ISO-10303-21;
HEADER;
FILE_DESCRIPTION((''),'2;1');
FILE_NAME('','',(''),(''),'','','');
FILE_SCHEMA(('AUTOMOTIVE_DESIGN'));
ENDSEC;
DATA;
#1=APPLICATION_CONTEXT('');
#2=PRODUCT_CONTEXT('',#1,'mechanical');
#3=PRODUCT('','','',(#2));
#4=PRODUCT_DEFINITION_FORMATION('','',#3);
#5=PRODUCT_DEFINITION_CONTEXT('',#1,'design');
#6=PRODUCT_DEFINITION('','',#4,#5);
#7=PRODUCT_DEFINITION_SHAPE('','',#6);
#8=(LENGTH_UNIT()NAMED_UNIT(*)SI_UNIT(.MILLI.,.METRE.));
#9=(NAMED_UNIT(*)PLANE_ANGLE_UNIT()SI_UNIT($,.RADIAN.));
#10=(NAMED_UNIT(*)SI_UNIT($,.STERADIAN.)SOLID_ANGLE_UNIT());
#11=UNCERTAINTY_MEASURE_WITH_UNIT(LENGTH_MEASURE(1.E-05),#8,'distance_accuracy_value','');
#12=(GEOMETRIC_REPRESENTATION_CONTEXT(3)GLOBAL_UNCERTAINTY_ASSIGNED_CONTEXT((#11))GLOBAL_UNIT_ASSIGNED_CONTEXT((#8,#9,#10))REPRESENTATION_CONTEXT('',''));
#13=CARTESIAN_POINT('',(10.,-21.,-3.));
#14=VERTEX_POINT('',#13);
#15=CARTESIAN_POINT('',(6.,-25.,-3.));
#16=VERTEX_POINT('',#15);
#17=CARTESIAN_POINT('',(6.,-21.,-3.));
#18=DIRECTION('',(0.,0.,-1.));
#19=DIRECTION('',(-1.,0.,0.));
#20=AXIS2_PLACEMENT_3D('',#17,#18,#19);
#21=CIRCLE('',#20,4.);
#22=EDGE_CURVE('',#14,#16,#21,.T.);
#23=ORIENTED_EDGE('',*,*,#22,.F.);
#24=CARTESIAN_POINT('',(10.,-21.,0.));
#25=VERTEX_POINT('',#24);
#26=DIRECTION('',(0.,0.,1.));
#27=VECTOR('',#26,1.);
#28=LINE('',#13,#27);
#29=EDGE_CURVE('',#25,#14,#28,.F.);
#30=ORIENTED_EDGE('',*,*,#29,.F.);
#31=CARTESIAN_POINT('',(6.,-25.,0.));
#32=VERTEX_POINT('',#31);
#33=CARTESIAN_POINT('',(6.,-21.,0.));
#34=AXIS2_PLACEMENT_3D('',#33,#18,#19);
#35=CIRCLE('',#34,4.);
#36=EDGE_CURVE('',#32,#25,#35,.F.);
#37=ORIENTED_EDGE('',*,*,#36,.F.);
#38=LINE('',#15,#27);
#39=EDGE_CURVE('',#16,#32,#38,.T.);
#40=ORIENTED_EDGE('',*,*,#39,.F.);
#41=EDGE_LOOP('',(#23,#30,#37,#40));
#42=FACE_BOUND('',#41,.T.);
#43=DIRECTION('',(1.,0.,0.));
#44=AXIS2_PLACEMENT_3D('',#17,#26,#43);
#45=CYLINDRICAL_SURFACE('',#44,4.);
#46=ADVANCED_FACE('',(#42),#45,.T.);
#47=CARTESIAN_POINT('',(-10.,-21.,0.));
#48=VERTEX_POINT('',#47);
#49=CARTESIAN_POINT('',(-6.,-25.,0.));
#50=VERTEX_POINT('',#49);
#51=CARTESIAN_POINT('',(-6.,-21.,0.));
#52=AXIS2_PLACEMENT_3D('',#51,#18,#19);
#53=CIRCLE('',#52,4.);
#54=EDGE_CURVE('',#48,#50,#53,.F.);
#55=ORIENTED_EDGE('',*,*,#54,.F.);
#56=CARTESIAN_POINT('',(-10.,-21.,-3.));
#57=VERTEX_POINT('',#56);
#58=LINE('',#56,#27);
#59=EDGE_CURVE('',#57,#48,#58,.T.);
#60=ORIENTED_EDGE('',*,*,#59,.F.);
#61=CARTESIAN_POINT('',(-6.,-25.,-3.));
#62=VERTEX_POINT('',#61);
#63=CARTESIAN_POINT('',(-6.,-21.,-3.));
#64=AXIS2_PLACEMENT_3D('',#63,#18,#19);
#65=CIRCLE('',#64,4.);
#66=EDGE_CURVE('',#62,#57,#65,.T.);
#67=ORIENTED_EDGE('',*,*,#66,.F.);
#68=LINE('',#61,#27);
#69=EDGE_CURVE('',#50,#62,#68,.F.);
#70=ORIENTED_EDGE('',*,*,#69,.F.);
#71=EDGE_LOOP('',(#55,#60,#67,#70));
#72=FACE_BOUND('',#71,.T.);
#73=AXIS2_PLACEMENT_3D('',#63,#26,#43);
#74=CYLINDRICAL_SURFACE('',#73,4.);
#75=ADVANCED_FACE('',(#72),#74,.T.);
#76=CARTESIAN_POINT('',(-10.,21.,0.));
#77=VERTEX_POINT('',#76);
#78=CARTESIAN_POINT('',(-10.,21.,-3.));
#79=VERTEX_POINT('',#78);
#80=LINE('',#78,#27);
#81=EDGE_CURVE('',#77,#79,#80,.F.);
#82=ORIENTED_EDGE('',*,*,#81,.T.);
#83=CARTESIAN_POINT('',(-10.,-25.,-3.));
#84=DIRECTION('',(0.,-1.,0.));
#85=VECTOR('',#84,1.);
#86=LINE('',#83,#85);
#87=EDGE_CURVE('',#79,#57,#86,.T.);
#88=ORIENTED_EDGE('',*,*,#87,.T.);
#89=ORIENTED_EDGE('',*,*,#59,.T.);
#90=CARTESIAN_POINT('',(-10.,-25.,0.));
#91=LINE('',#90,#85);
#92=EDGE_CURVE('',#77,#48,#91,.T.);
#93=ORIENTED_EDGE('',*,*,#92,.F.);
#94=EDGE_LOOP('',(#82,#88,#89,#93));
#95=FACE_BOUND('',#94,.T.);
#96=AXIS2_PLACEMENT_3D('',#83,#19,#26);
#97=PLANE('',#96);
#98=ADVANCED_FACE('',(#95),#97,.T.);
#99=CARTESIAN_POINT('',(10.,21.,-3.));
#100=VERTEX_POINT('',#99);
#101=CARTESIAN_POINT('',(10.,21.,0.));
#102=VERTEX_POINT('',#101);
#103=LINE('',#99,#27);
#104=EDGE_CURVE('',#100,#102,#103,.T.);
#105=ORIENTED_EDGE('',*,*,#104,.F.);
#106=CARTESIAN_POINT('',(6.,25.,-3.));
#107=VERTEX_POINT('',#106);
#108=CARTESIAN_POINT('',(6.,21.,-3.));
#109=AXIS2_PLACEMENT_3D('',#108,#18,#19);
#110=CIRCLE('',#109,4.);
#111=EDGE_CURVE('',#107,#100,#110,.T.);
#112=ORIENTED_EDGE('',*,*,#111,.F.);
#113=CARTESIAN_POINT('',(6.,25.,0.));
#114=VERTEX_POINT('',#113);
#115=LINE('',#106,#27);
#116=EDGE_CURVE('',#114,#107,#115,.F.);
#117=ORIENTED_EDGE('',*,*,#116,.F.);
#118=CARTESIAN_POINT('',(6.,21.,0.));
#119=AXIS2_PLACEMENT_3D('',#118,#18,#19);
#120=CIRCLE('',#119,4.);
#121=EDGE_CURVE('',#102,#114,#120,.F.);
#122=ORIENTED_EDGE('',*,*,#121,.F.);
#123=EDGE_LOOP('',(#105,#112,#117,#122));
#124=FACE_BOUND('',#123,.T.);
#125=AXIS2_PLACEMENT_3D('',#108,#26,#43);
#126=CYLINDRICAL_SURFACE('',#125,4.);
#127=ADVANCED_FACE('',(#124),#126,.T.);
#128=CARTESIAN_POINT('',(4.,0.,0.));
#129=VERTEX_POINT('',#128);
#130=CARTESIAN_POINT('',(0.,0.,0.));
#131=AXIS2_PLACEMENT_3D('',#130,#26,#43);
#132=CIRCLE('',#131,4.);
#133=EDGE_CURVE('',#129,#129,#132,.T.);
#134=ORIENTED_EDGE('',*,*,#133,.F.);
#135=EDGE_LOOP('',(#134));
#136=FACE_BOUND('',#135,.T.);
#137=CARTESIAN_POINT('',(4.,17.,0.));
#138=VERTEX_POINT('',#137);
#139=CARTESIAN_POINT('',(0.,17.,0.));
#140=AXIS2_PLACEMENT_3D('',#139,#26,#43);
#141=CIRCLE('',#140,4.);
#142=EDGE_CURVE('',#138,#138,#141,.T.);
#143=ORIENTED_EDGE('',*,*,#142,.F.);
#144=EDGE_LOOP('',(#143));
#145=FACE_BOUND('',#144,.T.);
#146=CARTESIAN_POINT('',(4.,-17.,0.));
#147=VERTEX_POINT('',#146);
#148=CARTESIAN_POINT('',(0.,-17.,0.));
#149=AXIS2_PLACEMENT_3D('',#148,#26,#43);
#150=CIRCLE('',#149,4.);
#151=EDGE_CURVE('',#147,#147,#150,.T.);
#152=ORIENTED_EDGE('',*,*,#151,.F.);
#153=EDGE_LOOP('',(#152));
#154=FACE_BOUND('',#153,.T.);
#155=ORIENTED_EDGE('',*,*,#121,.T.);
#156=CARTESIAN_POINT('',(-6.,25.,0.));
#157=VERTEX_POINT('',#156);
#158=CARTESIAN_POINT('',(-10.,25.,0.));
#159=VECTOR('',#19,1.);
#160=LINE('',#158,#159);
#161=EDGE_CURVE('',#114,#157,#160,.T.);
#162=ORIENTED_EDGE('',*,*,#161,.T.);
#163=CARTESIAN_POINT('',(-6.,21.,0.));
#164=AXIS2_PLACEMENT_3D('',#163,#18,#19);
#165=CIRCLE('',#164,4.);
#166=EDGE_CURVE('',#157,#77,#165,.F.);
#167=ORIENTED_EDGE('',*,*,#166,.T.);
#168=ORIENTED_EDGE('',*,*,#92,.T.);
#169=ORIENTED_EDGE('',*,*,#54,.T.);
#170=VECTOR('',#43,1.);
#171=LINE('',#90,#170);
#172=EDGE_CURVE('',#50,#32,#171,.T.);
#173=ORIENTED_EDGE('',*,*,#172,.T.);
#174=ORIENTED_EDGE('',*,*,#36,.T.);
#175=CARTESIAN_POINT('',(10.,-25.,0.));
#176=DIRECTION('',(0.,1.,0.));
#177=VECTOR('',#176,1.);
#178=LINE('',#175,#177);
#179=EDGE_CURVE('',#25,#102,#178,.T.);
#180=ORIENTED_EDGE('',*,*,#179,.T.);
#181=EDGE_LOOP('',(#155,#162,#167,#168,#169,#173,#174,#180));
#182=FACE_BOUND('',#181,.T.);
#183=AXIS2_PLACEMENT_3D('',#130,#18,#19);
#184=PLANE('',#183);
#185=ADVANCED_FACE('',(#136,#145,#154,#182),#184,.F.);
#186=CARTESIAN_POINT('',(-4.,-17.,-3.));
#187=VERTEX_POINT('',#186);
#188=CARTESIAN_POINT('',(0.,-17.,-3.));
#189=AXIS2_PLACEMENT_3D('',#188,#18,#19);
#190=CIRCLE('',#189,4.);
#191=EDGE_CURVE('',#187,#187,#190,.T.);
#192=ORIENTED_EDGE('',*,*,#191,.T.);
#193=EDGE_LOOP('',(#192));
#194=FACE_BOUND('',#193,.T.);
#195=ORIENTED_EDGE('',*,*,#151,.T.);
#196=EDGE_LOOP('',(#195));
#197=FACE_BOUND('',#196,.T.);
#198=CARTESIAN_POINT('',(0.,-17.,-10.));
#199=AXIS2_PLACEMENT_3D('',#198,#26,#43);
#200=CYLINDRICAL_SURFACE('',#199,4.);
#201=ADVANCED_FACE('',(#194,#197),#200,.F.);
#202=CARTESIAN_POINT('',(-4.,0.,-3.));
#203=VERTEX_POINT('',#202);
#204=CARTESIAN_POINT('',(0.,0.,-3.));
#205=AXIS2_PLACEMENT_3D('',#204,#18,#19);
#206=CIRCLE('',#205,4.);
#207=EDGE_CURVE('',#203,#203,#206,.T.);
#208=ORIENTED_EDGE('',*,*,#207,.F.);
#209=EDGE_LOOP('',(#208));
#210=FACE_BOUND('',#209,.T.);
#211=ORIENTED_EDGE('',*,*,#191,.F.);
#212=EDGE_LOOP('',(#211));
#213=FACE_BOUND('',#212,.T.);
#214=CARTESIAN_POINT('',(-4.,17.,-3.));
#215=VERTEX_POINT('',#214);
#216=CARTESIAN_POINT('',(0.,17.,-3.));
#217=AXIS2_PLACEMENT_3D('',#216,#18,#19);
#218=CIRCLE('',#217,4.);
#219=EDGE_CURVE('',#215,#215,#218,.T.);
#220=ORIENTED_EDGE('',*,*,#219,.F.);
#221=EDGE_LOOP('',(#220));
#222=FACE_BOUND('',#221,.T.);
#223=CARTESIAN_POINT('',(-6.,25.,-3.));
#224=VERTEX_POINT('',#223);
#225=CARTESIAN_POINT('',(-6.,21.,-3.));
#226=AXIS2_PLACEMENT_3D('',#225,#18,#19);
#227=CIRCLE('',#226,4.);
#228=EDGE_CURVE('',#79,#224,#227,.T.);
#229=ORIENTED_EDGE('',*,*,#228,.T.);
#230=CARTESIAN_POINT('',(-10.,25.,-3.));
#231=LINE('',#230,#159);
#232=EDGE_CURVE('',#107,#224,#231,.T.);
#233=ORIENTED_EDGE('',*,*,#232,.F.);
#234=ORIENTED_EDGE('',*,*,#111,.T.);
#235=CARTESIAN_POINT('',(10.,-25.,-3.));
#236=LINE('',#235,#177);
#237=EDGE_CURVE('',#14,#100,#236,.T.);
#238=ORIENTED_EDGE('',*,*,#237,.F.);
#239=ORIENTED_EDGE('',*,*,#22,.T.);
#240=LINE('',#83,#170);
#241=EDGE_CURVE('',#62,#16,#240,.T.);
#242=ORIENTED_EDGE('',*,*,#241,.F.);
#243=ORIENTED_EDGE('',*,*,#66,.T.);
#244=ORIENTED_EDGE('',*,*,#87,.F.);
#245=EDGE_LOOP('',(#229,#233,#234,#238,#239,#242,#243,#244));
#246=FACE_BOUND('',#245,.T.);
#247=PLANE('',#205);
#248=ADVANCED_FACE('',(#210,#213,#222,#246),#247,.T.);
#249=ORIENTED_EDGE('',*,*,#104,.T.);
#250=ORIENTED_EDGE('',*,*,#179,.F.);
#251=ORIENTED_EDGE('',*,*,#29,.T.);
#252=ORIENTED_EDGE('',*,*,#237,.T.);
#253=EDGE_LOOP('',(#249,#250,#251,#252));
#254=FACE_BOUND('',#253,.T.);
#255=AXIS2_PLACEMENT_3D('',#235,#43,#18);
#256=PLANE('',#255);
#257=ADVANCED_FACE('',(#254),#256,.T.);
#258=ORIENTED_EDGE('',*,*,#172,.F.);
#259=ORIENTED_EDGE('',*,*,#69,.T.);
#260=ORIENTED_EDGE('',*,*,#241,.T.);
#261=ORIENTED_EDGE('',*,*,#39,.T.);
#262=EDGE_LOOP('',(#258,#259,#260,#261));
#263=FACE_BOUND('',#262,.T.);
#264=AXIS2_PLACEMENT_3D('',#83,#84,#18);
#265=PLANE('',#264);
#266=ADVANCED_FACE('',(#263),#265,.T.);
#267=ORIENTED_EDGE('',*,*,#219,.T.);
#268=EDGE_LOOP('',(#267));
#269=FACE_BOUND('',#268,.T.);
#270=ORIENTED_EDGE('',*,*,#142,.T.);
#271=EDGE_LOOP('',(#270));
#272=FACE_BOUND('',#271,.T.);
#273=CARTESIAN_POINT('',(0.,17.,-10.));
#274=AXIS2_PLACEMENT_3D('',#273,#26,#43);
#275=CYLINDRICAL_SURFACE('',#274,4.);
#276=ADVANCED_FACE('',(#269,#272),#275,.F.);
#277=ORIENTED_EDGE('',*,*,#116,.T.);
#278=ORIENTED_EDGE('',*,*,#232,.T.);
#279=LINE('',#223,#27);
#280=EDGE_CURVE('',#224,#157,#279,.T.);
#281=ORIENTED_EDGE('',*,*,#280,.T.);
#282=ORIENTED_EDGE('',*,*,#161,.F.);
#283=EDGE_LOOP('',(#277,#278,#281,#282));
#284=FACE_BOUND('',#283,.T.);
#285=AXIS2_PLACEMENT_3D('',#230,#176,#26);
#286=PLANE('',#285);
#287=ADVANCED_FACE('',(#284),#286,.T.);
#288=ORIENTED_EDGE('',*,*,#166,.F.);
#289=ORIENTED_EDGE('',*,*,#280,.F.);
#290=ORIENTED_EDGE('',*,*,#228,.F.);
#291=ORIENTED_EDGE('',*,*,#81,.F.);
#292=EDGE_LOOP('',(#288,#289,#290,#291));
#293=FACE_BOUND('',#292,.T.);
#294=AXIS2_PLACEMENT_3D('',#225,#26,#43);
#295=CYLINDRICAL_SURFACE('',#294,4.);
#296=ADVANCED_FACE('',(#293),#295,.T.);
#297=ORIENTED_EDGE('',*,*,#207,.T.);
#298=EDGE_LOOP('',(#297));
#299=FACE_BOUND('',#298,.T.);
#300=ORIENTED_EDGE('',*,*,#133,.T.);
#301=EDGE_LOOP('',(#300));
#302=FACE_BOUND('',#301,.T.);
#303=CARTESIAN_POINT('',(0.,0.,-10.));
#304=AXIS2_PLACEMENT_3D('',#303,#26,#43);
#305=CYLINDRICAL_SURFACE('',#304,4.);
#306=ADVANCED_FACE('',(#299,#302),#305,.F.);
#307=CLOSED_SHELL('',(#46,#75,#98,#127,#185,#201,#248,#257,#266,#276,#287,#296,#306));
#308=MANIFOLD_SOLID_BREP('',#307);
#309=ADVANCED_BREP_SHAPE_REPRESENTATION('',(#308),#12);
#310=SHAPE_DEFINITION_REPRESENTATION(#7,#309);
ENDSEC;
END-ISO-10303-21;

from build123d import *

# Parameters (mm, degrees)
SKETCH_1_W             = 20
SKETCH_1_H             = 50
SM_BASE_FLANGE_1_DEPTH = 3
SKETCH_6_R             = 4
CUT_EXTRUDE_1_DEPTH    = 10
FILLET_1_R             = 4


# Sheet-metal steps are written as plain solids
with BuildPart() as part:
    # Sketch 1 → 基体-法兰1 (new body)
    with BuildSketch(Plane.XY):
        Rectangle(SKETCH_1_W, SKETCH_1_H)
    extrude(amount=-SM_BASE_FLANGE_1_DEPTH)

    # 草图6 → 切除-拉伸1 (cut)
    with BuildSketch(Plane.XY):
        with Locations((0, 17)):
            Circle(SKETCH_6_R)
        with Locations((0, -17)):
            Circle(SKETCH_6_R)
        Circle(SKETCH_6_R)
    extrude(amount=-CUT_EXTRUDE_1_DEPTH, mode=Mode.SUBTRACT)

    # 圆角1
    fillet_1_edges = [part.edges().sort_by_distance(p)[0] for p in [
        (10, -25, -1.5),
        (-10, -25, -1.5),
        (-10, 25, -1.5),
        (10, 25, -1.5),
    ]]
    fillet(fillet_1_edges, radius=FILLET_1_R)


solid = part.part
